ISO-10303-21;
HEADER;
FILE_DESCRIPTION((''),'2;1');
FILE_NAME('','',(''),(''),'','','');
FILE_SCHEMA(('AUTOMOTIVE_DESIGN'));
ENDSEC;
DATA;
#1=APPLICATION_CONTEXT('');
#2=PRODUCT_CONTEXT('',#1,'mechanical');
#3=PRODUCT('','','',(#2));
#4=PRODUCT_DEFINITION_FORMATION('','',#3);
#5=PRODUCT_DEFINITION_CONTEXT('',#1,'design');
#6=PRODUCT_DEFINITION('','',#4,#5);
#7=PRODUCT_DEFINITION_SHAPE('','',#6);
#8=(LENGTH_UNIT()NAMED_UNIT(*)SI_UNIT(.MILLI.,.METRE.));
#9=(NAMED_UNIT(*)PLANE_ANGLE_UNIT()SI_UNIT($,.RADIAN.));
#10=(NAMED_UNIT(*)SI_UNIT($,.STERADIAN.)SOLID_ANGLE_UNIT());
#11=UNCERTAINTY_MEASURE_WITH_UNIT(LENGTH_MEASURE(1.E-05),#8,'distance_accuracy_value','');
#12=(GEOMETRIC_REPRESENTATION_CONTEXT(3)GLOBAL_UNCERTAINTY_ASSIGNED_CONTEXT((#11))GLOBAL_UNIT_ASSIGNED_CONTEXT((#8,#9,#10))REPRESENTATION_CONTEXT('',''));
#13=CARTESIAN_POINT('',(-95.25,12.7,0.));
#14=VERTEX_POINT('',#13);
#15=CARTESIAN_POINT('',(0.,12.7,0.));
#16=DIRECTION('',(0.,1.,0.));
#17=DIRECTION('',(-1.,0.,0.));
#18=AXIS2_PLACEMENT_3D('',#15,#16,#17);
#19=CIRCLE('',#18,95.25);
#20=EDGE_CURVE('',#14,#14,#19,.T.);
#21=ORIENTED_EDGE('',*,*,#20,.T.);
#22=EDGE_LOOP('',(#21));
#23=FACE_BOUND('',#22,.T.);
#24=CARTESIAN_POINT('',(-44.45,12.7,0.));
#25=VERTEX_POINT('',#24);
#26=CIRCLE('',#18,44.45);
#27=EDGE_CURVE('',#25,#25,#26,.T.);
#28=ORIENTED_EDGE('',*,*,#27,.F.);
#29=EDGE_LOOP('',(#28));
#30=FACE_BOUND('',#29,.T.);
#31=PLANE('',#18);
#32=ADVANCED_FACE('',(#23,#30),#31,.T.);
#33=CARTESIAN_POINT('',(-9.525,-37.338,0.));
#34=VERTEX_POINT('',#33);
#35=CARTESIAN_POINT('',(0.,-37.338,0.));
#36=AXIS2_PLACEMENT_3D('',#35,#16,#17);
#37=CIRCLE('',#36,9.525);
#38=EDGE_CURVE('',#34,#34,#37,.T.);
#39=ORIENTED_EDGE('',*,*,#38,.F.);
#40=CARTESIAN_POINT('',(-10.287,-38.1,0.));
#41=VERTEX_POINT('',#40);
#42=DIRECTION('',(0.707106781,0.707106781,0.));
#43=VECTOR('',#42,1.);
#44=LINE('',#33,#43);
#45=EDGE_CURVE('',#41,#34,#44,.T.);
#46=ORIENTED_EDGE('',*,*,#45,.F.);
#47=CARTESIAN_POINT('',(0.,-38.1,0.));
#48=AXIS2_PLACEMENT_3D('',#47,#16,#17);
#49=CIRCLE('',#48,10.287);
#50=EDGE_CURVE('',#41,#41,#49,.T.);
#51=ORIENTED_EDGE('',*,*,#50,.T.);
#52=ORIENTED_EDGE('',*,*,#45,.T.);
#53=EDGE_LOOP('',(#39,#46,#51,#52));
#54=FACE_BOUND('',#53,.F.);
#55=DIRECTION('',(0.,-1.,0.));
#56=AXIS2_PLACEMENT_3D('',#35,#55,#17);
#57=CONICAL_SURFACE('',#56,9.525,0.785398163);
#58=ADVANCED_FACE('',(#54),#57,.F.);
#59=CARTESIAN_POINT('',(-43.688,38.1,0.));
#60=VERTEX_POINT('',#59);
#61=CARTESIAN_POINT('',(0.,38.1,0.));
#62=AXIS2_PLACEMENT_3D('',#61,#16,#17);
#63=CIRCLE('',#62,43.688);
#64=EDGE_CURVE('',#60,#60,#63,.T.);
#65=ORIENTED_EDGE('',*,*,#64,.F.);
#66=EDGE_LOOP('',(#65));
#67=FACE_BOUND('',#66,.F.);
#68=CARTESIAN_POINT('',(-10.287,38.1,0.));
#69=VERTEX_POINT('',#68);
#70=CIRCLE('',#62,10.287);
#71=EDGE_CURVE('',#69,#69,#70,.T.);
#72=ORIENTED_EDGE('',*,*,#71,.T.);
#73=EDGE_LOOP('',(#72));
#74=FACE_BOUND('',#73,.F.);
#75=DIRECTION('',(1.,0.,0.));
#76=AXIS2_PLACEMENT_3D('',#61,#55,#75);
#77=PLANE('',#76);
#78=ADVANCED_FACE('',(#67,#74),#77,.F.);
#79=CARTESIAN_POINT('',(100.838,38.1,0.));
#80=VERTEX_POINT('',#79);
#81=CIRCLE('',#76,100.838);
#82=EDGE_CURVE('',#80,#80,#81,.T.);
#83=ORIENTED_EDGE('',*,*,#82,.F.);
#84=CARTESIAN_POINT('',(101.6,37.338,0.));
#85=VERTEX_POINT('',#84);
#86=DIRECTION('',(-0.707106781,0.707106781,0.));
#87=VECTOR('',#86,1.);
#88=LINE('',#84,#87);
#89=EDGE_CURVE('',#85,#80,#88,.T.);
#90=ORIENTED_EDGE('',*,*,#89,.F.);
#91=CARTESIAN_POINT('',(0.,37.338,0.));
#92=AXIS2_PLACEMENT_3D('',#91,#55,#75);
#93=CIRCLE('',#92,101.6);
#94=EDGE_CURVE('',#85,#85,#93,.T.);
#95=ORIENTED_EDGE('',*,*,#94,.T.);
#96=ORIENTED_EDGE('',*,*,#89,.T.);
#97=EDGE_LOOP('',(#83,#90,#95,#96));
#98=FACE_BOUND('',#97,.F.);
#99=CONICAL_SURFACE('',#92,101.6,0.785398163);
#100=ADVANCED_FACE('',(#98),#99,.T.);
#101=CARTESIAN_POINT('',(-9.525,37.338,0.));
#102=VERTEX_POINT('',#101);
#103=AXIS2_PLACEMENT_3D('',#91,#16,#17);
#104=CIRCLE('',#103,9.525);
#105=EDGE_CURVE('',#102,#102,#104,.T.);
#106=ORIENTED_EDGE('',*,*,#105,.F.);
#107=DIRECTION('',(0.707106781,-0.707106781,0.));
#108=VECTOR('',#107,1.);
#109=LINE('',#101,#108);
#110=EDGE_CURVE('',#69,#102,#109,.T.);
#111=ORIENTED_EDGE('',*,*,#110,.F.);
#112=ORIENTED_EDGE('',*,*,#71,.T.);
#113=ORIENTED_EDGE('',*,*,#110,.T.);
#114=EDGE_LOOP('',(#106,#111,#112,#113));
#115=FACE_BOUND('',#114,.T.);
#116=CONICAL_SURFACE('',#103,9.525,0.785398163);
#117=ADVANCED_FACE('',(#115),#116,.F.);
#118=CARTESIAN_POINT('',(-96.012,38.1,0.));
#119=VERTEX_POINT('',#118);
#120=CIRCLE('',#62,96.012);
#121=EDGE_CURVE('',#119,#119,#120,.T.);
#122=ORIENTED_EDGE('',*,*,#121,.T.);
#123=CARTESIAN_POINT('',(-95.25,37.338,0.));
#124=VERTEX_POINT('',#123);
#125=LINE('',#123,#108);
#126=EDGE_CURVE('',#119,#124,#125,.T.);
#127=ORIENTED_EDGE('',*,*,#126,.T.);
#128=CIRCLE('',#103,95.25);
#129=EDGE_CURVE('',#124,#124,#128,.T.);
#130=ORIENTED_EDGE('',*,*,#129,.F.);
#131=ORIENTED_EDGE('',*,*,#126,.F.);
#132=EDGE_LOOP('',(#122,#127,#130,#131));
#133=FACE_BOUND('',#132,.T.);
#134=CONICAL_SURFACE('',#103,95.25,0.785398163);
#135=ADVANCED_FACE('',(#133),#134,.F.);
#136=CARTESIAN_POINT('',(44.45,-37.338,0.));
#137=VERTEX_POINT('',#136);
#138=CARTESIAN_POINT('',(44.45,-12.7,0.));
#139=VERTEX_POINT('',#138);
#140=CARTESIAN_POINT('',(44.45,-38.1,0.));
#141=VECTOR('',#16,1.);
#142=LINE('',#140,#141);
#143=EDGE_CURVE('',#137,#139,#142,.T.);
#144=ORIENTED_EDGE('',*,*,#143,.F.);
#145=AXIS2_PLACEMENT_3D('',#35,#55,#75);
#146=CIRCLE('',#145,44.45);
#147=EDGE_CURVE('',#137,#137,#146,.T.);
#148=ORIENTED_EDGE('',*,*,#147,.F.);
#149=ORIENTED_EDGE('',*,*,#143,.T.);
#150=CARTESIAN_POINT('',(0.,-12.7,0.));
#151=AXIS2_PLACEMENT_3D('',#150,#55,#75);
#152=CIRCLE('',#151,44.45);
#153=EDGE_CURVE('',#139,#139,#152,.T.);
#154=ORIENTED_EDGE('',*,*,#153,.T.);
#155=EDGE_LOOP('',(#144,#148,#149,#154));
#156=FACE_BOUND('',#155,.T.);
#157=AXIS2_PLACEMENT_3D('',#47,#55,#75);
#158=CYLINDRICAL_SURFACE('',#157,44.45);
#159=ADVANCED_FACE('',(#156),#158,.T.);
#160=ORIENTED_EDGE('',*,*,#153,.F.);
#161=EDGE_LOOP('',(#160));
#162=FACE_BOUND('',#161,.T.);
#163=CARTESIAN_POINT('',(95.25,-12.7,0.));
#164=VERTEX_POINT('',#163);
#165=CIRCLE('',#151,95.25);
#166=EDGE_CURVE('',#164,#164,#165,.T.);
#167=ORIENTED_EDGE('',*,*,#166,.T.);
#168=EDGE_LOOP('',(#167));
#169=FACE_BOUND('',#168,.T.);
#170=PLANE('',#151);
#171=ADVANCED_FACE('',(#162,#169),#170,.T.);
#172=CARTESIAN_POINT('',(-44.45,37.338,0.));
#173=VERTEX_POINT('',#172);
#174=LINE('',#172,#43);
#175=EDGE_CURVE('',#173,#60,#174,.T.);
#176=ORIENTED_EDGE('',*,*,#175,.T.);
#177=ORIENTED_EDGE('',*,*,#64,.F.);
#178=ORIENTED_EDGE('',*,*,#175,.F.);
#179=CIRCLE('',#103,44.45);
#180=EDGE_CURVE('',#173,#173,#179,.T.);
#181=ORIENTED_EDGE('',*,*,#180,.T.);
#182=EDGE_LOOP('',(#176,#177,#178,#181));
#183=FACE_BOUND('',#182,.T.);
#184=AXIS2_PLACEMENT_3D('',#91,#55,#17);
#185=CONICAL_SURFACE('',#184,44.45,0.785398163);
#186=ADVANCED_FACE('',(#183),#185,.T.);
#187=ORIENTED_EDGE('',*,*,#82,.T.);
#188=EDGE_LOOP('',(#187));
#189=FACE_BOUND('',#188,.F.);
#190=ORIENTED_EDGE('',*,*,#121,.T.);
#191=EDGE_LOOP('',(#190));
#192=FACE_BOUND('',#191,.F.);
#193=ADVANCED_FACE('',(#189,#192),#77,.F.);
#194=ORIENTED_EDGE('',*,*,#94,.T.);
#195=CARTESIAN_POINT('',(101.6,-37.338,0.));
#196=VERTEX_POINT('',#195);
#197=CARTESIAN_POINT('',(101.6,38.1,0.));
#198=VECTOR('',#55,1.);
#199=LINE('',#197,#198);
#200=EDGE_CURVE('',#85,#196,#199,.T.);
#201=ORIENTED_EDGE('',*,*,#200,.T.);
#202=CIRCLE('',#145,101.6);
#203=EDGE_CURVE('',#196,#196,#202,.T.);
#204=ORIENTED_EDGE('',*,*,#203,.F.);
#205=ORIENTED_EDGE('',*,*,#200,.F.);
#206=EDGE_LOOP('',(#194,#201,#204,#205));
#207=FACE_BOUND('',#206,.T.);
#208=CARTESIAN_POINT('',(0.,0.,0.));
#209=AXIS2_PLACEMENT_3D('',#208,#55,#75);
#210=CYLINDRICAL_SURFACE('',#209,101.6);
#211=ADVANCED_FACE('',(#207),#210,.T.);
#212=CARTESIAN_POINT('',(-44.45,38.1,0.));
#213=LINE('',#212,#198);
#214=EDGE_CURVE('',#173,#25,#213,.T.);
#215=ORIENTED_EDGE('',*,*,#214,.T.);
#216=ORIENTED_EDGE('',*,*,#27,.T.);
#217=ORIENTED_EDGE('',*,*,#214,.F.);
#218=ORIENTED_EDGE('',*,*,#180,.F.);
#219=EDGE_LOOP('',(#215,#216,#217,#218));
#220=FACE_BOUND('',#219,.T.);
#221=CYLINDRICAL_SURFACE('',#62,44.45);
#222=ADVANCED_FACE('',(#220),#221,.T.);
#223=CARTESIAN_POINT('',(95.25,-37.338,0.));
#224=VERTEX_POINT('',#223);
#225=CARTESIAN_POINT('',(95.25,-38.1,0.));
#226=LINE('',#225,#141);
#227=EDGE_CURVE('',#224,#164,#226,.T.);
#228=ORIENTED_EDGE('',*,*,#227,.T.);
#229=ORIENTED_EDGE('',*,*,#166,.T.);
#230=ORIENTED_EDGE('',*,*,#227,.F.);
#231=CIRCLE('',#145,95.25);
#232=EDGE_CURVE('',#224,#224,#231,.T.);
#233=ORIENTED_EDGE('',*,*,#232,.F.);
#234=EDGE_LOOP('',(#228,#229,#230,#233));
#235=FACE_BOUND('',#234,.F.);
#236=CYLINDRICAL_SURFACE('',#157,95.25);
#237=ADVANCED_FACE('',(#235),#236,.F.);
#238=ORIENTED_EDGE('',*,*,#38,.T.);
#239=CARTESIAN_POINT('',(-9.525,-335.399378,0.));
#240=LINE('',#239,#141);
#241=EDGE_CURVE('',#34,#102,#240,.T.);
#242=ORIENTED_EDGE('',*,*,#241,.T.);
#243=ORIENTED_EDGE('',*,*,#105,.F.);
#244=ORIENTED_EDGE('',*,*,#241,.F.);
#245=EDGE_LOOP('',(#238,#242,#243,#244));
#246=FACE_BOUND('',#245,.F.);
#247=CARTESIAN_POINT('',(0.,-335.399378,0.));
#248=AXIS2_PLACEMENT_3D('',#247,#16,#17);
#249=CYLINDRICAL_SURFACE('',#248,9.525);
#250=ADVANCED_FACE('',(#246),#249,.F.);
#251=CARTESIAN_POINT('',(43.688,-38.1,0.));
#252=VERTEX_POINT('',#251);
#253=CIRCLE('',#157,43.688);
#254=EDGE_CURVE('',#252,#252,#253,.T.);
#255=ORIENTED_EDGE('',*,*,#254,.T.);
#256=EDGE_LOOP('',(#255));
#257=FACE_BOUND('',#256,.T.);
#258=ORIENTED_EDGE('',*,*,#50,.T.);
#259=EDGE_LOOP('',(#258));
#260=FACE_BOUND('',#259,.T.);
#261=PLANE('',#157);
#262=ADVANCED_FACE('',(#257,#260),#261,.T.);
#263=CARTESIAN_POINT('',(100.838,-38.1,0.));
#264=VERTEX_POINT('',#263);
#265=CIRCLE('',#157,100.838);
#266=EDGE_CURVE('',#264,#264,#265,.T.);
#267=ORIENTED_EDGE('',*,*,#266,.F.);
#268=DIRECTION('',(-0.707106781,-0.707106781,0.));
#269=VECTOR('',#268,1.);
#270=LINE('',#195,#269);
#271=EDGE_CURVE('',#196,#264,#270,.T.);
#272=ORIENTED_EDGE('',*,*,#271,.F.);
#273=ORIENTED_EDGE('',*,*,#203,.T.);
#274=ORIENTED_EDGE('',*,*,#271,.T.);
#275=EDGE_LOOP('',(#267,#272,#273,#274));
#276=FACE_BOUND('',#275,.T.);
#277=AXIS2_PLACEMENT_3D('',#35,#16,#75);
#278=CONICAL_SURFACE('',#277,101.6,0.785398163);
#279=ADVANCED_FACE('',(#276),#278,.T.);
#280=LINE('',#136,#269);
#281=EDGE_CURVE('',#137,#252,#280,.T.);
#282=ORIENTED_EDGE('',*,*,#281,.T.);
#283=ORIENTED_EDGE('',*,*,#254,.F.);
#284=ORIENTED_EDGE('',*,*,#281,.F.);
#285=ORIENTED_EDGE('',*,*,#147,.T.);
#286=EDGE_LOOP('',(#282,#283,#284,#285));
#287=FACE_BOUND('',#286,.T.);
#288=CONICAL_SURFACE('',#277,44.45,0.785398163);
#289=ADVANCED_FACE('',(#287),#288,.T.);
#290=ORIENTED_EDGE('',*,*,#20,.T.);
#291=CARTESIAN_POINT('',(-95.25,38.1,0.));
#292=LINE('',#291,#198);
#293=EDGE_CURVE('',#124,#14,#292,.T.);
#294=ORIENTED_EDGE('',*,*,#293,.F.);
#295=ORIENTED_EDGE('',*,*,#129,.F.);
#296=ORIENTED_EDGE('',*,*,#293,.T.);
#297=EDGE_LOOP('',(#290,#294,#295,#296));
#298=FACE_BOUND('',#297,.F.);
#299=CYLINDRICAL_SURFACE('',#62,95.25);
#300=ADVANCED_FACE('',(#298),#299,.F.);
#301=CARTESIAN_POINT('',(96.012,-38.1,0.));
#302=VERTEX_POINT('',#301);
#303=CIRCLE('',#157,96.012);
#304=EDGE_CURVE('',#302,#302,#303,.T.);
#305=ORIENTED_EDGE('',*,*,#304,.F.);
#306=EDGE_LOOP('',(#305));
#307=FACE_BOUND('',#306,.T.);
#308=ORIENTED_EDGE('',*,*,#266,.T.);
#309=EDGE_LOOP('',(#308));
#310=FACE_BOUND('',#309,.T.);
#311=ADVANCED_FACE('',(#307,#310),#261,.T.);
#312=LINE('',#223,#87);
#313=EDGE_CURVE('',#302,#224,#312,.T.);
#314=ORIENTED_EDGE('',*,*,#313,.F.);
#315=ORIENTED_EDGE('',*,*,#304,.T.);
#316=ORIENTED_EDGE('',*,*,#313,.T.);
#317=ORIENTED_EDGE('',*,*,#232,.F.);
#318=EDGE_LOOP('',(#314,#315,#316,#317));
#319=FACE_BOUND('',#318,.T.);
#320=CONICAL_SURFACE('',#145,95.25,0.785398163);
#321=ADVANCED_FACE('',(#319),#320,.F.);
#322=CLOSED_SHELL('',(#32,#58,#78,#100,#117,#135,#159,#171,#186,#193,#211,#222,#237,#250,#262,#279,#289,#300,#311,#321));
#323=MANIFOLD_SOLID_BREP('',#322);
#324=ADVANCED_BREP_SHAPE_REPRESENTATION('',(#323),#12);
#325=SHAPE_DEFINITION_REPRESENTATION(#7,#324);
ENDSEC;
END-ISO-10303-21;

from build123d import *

# Parameters (mm, degrees)
F0_R     = 101.6
F1_DEPTH = 38.1
F2_R     = 95.25
F2_R_2   = 44.45
F3_DEPTH = 25.4
F4_R     = 95.25
F4_R_2   = 44.45
F5_DEPTH = 25.4
F7_D     = 19.05
F8_SIZE  = 0.762


with BuildPart() as f1:
    # F0 (on Front) → F1 (new body, symmetric)
    with BuildSketch(Plane.XZ):
        Circle(F0_R)
    extrude(amount=F1_DEPTH, both=True)

    # F2 (on face) → F3 (cut)
    with BuildSketch(Plane.XZ.offset(38.1)):
        Circle(F2_R)
        Circle(F2_R_2, mode=Mode.SUBTRACT)
    extrude(amount=-F3_DEPTH, mode=Mode.SUBTRACT)

    # F4 (on face) → F5 (cut)
    with BuildSketch(Plane(origin=(0, 38.1, 0), x_dir=(-1, 0, 0), z_dir=(0, 1, 0))):
        Circle(F4_R)
        Circle(F4_R_2, mode=Mode.SUBTRACT)
    extrude(amount=-F5_DEPTH, mode=Mode.SUBTRACT)

    # F7 (through all)
    with Locations(Plane.XZ.offset(38.1)):
        with Locations((0, 0)):
            Hole(F7_D / 2)

    # F8
    f8_edges = [f1.edges().sort_by_distance(p)[0] for p in [
        (-44.45, -38.1, 0),
        (-95.25, -38.1, 0),
        (-101.6, -38.1, 0),
        (44.45, 38.1, 0),
        (95.25, 38.1, 0),
        (-101.6, 38.1, 0),
        (-9.525, 38.1, 0),
        (-9.525, -38.1, 0),
    ]]
    chamfer(f8_edges, length=F8_SIZE)


solid = f1.part
